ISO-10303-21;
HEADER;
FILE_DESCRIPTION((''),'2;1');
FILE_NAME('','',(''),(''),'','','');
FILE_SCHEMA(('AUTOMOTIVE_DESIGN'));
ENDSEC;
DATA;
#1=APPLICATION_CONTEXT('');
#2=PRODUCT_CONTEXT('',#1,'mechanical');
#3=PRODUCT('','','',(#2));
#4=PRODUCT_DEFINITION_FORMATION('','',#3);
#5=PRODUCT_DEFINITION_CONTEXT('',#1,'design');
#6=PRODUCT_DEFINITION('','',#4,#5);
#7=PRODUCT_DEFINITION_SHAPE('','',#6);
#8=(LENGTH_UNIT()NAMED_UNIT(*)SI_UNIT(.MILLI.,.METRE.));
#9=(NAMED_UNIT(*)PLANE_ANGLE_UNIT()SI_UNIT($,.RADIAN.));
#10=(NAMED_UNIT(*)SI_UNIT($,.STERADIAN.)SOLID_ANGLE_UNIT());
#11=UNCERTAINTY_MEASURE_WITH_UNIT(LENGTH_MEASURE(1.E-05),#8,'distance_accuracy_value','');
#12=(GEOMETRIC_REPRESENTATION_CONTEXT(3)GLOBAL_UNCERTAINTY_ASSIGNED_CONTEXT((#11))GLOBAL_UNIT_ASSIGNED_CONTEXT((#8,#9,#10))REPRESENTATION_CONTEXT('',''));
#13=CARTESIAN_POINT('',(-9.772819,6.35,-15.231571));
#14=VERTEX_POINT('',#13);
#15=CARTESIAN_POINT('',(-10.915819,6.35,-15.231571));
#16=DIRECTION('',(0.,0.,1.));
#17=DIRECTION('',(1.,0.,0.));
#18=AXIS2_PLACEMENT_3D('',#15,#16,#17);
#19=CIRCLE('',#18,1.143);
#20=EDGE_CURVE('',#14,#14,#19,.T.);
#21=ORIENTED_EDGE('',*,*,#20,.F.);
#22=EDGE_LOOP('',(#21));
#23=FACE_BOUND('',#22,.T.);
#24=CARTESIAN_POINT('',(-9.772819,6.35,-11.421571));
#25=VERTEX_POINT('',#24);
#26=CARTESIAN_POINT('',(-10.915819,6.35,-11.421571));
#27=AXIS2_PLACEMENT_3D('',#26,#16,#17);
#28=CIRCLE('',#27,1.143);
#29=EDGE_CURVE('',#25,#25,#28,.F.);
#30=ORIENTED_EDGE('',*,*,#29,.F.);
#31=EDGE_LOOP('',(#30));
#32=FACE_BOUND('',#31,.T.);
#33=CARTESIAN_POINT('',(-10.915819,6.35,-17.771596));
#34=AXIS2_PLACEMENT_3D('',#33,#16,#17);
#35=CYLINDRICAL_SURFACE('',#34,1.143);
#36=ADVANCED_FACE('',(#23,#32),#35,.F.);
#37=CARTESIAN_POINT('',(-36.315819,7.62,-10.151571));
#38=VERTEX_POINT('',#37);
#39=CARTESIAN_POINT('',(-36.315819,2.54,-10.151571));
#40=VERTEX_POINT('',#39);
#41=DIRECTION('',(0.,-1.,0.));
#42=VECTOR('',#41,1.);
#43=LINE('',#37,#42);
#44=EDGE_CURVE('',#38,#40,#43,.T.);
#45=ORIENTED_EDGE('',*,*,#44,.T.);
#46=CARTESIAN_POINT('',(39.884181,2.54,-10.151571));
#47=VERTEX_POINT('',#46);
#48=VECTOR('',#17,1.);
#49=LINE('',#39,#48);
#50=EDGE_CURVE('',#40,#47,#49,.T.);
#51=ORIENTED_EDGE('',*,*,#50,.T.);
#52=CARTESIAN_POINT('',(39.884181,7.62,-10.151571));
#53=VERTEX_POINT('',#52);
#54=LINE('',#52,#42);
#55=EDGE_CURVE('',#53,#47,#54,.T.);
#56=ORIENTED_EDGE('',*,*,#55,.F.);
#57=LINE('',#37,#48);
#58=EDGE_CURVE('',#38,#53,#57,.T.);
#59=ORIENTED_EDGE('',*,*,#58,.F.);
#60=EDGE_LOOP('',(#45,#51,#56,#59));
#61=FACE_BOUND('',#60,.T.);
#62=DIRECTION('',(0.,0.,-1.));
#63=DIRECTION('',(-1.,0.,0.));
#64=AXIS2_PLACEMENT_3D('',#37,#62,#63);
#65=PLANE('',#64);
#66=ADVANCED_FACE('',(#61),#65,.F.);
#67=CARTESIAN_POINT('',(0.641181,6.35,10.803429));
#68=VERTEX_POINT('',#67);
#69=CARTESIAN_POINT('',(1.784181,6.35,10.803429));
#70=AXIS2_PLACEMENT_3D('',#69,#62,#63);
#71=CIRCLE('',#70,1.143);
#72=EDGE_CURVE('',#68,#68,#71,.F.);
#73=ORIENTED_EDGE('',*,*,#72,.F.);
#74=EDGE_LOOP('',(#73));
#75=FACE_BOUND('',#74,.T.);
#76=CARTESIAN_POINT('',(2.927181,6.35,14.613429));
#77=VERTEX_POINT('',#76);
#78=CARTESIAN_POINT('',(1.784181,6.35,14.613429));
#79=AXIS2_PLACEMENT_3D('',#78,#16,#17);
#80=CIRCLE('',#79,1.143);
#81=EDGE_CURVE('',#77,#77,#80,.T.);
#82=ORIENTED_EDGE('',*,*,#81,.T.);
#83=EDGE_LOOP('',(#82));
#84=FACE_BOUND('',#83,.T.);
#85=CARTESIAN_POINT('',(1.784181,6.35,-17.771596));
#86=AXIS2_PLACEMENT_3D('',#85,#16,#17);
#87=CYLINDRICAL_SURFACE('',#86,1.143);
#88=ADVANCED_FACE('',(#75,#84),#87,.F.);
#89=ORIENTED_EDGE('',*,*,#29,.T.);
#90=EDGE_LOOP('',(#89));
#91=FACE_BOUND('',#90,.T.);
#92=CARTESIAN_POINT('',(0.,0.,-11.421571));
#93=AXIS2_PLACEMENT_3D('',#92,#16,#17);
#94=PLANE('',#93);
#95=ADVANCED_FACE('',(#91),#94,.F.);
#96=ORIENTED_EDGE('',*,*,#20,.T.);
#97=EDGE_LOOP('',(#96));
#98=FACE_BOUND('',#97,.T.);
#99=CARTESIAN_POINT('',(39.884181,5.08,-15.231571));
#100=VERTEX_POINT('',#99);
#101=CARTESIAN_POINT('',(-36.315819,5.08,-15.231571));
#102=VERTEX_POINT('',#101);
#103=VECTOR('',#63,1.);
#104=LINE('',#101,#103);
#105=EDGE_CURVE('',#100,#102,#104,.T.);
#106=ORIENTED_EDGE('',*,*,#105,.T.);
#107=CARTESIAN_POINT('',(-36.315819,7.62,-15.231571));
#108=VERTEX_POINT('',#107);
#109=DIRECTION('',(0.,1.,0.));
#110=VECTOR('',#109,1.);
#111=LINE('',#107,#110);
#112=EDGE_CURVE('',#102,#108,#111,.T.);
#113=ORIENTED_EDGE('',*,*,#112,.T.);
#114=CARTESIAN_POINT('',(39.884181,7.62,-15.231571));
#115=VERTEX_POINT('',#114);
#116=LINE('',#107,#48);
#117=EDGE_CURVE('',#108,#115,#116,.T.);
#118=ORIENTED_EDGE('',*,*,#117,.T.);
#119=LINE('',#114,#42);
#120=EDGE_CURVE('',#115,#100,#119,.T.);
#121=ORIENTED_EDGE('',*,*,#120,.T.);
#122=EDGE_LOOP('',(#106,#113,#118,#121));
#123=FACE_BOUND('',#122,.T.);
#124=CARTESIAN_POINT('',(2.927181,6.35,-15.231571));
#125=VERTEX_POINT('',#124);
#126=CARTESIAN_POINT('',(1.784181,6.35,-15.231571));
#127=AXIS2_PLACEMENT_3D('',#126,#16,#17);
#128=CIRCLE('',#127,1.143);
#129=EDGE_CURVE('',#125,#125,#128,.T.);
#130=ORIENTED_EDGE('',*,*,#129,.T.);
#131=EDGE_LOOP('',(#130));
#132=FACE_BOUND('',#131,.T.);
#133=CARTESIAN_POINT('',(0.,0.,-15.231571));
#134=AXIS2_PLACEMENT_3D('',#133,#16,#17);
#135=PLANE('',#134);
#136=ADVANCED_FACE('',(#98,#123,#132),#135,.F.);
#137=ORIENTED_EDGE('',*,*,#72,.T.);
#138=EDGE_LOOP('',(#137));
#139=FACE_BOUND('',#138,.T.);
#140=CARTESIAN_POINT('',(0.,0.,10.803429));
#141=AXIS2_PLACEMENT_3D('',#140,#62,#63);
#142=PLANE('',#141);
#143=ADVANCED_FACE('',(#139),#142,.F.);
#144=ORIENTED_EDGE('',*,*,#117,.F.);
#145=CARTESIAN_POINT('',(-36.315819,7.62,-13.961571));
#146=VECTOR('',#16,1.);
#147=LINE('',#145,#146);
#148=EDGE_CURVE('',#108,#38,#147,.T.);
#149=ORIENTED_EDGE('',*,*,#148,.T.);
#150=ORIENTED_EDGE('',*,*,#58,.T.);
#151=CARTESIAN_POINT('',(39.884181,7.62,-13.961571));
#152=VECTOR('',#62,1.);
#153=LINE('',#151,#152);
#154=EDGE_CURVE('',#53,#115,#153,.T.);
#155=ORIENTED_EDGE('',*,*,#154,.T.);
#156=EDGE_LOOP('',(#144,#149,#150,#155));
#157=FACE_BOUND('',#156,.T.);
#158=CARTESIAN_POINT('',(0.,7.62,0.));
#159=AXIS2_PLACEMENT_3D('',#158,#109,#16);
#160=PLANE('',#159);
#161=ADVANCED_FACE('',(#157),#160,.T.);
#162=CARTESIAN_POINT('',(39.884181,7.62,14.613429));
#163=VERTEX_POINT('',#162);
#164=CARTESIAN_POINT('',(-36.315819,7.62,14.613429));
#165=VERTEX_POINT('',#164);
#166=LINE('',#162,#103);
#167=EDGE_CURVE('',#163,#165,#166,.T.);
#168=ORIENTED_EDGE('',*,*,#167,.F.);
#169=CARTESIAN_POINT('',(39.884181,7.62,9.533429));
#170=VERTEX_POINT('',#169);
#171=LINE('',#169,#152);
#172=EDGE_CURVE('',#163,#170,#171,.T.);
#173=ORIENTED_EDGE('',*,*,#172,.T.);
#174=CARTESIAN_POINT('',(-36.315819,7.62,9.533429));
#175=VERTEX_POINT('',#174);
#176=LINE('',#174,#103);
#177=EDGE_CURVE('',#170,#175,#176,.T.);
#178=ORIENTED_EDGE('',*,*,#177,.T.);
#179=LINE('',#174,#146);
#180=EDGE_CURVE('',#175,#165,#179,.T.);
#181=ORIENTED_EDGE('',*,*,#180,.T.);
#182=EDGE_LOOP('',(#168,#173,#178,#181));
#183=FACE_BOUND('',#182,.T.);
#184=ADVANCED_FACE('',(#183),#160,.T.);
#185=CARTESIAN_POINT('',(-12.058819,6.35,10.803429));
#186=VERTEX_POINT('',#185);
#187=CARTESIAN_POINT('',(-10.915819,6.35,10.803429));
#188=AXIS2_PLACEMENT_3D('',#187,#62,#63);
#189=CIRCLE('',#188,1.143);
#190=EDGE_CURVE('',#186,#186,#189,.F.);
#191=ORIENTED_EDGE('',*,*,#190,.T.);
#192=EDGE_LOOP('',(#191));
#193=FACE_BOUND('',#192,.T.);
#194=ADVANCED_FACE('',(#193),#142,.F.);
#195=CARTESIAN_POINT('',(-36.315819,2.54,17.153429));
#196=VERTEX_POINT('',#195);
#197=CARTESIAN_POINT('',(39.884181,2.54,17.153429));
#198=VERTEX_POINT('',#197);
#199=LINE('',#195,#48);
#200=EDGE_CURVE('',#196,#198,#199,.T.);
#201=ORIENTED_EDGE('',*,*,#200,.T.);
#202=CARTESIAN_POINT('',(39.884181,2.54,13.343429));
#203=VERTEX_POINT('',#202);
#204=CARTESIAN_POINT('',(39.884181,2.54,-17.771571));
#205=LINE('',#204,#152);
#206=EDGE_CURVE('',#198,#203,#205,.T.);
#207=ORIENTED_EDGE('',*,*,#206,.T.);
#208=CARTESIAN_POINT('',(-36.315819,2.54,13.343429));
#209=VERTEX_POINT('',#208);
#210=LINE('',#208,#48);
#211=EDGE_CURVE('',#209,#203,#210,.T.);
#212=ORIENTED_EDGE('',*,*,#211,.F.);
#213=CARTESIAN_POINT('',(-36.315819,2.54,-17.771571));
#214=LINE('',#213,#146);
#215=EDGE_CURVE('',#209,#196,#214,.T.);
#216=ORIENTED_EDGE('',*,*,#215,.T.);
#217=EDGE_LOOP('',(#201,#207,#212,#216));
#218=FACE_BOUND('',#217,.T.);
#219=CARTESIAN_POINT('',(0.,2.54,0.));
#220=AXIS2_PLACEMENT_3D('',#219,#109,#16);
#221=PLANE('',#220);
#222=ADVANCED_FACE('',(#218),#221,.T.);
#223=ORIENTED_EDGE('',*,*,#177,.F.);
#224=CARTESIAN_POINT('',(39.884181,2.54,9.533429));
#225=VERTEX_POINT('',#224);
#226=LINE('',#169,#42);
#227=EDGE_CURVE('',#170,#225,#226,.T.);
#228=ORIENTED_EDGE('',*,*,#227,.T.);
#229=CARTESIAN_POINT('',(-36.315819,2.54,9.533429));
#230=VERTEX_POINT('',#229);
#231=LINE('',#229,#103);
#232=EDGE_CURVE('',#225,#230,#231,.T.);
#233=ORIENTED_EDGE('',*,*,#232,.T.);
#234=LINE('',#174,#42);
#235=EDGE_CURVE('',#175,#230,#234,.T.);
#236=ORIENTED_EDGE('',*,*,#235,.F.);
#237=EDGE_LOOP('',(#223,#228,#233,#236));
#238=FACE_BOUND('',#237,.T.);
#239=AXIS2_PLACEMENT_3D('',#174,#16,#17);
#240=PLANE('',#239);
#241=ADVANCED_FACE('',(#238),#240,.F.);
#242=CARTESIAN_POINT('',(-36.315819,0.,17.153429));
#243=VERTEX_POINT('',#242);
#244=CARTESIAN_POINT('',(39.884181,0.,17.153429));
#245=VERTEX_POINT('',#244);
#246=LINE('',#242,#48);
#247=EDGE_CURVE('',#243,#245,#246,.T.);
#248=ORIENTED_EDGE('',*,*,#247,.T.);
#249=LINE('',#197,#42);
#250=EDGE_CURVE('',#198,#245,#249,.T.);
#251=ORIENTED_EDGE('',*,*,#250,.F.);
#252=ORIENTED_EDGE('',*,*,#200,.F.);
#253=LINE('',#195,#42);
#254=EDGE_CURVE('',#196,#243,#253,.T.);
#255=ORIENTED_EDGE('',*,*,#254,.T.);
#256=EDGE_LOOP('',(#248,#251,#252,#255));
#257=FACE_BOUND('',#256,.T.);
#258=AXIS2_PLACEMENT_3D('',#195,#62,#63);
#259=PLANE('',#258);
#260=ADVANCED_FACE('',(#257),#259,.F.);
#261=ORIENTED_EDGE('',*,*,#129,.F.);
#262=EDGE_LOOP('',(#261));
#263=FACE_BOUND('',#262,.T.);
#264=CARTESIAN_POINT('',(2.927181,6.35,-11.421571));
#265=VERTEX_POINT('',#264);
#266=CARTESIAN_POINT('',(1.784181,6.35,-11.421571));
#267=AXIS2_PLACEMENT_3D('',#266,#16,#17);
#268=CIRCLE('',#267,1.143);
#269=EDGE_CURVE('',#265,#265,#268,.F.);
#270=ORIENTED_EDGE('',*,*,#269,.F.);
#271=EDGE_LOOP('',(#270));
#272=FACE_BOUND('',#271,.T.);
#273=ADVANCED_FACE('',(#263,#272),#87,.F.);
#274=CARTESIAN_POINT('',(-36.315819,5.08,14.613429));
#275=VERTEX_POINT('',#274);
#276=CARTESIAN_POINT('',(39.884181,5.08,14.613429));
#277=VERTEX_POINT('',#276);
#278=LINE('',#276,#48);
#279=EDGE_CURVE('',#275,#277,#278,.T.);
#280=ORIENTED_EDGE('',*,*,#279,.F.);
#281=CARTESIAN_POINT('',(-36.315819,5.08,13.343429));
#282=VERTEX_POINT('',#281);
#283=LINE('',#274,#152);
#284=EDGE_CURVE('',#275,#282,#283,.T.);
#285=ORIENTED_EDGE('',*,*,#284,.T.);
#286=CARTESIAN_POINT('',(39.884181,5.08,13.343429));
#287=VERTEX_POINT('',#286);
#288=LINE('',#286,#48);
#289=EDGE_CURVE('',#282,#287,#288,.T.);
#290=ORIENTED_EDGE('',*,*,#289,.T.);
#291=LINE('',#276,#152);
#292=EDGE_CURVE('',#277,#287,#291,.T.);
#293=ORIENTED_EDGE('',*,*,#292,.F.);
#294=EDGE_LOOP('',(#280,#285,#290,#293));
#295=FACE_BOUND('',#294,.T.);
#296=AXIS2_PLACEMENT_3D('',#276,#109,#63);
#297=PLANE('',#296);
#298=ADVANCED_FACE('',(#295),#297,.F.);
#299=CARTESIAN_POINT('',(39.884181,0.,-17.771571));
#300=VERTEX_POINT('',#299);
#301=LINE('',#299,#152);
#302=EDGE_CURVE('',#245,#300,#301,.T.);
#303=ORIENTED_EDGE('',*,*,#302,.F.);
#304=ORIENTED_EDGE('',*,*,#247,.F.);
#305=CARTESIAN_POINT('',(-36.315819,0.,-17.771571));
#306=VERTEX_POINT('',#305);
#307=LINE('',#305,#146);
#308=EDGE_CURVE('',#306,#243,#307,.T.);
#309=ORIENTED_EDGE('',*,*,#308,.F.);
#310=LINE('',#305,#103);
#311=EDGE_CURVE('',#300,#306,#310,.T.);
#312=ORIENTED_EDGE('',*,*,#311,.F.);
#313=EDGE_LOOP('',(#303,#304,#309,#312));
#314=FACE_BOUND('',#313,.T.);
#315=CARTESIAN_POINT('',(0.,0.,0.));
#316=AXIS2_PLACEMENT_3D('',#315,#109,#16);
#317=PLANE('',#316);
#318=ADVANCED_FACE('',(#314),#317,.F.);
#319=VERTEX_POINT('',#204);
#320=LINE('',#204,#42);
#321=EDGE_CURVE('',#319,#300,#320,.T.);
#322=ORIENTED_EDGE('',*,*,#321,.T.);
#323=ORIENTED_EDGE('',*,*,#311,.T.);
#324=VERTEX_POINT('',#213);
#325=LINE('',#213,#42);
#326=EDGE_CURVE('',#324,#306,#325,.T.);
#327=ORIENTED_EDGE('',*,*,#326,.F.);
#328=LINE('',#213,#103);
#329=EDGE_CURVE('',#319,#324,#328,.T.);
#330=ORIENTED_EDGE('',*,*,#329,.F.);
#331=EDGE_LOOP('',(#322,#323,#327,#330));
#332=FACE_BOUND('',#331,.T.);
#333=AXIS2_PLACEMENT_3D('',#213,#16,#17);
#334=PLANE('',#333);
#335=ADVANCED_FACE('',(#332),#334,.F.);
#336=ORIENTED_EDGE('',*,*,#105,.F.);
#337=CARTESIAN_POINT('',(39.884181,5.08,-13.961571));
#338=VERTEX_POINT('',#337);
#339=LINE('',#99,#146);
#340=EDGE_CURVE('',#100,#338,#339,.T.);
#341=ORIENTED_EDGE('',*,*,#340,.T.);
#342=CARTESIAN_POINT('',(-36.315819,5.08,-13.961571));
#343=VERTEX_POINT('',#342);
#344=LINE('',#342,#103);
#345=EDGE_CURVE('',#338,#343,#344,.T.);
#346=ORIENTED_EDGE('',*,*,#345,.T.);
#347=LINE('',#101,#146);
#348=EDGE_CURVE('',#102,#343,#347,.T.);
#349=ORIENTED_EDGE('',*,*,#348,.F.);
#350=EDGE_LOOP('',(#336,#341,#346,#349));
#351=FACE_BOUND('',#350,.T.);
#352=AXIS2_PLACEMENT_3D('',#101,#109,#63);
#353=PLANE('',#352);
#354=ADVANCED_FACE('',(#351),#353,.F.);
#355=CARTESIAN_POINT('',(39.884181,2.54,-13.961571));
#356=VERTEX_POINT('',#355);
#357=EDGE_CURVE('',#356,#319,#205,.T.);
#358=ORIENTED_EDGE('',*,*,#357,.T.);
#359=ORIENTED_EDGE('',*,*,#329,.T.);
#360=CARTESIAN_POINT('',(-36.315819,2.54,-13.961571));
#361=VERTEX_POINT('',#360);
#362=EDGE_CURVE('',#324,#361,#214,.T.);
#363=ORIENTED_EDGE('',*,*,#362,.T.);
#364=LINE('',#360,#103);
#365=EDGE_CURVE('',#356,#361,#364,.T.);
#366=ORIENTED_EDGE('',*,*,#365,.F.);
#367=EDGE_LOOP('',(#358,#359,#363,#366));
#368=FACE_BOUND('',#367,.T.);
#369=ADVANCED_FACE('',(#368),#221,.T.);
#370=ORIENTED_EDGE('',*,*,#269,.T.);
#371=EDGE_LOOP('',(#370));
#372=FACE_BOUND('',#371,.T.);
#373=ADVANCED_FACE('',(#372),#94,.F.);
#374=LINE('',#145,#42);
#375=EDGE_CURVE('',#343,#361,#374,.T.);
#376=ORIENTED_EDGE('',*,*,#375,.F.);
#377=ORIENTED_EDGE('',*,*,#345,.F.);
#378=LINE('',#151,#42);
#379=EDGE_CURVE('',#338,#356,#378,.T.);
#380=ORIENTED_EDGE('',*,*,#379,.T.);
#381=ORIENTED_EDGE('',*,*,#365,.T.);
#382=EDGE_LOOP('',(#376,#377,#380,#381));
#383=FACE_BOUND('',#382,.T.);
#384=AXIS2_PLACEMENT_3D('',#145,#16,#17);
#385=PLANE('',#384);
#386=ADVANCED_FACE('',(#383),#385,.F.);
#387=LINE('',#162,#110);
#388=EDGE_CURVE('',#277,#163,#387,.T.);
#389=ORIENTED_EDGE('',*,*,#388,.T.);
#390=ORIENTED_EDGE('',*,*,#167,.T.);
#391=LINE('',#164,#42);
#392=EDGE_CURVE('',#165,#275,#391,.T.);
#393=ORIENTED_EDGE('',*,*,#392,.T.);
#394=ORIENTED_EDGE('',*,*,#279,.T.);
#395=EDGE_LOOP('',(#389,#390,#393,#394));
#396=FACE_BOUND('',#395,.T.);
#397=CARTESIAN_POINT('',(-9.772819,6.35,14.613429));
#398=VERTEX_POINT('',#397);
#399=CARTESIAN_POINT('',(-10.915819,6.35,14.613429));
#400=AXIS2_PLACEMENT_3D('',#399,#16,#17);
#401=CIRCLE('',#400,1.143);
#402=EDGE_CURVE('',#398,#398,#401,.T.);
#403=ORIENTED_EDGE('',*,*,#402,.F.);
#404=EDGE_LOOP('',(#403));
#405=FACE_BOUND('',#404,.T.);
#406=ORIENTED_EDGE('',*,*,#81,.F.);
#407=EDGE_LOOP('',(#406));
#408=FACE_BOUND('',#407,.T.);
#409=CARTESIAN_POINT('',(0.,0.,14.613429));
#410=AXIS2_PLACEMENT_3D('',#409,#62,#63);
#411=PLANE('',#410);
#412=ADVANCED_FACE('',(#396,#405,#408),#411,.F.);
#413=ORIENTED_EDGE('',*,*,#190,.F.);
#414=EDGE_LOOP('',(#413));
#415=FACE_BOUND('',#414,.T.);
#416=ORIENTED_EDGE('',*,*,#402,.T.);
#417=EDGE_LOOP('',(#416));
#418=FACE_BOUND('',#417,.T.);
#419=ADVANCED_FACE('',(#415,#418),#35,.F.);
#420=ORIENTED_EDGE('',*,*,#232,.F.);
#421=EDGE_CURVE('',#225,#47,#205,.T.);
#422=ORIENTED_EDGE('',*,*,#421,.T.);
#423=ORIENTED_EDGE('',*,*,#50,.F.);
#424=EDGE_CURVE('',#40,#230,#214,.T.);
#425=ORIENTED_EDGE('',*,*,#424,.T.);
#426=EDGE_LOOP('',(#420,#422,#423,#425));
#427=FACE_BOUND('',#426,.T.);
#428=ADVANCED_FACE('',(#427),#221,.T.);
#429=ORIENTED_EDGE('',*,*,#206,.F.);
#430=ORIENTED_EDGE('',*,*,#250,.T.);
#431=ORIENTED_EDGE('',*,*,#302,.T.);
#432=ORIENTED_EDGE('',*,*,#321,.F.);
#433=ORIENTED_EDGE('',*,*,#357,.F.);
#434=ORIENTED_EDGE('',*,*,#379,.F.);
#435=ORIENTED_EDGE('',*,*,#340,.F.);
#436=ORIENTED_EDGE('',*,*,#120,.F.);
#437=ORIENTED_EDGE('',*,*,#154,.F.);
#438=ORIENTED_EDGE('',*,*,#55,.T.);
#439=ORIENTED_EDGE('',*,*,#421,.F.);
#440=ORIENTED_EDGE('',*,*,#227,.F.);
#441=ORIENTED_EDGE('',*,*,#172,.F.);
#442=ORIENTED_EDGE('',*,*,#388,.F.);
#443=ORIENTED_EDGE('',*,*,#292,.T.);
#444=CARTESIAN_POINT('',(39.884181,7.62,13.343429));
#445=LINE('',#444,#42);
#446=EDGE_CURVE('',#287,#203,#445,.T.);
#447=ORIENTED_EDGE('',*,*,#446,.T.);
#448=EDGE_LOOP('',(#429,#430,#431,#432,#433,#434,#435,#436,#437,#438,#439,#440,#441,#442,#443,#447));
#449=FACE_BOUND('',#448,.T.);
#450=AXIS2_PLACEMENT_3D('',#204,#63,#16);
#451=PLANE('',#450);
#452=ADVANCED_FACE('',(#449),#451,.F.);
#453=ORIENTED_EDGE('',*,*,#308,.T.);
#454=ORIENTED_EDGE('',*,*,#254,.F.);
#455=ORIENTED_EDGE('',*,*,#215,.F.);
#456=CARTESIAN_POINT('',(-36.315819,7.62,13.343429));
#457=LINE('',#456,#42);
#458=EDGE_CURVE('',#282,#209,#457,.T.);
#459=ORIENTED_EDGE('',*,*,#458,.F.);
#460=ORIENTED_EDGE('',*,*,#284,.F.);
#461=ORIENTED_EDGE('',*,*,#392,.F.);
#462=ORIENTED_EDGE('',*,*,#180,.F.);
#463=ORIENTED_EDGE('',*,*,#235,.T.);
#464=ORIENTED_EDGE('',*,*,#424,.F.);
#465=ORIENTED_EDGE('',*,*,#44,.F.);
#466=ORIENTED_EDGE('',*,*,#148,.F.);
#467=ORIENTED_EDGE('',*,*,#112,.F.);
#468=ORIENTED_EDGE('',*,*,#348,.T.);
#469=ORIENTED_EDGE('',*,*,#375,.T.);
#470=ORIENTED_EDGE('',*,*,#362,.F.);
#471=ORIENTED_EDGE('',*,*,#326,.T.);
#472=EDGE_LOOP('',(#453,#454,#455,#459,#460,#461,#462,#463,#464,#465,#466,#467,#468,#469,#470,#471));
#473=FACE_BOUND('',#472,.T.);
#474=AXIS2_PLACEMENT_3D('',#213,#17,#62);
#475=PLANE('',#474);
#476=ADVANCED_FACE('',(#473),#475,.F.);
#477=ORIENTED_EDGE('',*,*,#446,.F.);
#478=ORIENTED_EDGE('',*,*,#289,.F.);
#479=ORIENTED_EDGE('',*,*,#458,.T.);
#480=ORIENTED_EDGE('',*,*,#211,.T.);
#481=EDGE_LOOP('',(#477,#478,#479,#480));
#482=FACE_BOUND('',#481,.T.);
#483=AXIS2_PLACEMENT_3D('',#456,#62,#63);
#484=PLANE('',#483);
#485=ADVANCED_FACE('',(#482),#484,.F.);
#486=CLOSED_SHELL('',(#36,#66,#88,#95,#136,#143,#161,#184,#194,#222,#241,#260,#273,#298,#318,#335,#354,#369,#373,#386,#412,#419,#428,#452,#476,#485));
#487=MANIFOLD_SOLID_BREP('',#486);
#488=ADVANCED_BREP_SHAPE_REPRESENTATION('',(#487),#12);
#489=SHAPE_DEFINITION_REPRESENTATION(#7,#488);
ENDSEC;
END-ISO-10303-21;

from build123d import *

# Parameters (mm, degrees)
SKETCH1_W               = 76.2
SKETCH1_H               = 34.925
BOSS_EXTRUDE1_DEPTH     = 2.54
SKETCH3_W               = 76.2
SKETCH3_H               = 3.81
BOSS_EXTRUDE3_DEPTH     = 5.08
SKETCH6_W               = 76.2
SKETCH6_H               = 2.54
BOSS_EXTRUDE4_DEPTH     = 1.27
SKETCH7_W               = 76.2
SKETCH7_H               = 2.54
BOSS_EXTRUDE5_DEPTH     = 1.27
FILL_START              = -15.231570796
FILL_PATTERN1_OUTLINE_R = 1.143
FILL_PATTERN1_DEPTH     = 29.845
SKETCH8_W               = 76.2
SKETCH8_H               = 2.54
BOSS_EXTRUDE6_DEPTH     = 1.27
SKETCH9_W               = 76.2
SKETCH9_H               = 2.54
BOSS_EXTRUDE7_DEPTH     = 1.27


# Read off the part's stored shape, not the designer's step: Fill Pattern1
with BuildPart() as part:
    # Sketch1 → Boss-Extrude1 (new body)
    with BuildSketch(Plane(origin=(0, 0, 0), x_dir=(1, 0, 0), z_dir=(0, 1, 0))):
        with Locations((1.784181416, 0.309070796)):
            Rectangle(SKETCH1_W, SKETCH1_H)
    extrude(amount=BOSS_EXTRUDE1_DEPTH)

    # Sketch3 → Boss-Extrude3 (add)
    with BuildSketch(Plane(origin=(0, 2.54, 0), x_dir=(1, 0, 0), z_dir=(0, 1, 0))):
        with Locations((1.784181416, 12.056570796)):
            Rectangle(SKETCH3_W, SKETCH3_H)
        with Locations((1.784181416, -11.438429204)):
            Rectangle(SKETCH3_W, SKETCH3_H)
    extrude(amount=BOSS_EXTRUDE3_DEPTH)

    # Sketch6 → Boss-Extrude4 (add)
    with BuildSketch(Plane.XY.offset(13.343429204)):
        with Locations((1.784181416, 6.35)):
            Rectangle(SKETCH6_W, SKETCH6_H)
    extrude(amount=BOSS_EXTRUDE4_DEPTH)

    # Sketch7 → Boss-Extrude5 (add)
    with BuildSketch(Plane(origin=(0, 0, -13.961570796), x_dir=(-1, 0, 0), z_dir=(0, 0, -1))):
        with Locations((-1.784181416, 6.35)):
            Rectangle(SKETCH7_W, SKETCH7_H)
    extrude(amount=BOSS_EXTRUDE5_DEPTH)

    # Fill Pattern1 outline → Fill Pattern1 (cut)
    with BuildSketch(Plane.XY.offset(FILL_START)):
        with Locations((1.784181416, 6.35)):
            Circle(FILL_PATTERN1_OUTLINE_R)
        with Locations((-10.915818584, 6.35)):
            Circle(FILL_PATTERN1_OUTLINE_R)
    extrude(amount=FILL_PATTERN1_DEPTH, mode=Mode.SUBTRACT)

    # Sketch8 → Boss-Extrude6 (add)
    with BuildSketch(Plane(origin=(0, 0, 9.533429204), x_dir=(-1, 0, 0), z_dir=(0, 0, -1))):
        with Locations((-1.784181416, 6.35)):
            Rectangle(SKETCH8_W, SKETCH8_H)
    extrude(amount=-BOSS_EXTRUDE6_DEPTH)

    # Sketch9 → Boss-Extrude7 (add)
    with BuildSketch(Plane.XY.offset(-10.151570796)):
        with Locations((1.784181416, 6.35)):
            Rectangle(SKETCH9_W, SKETCH9_H)
    extrude(amount=-BOSS_EXTRUDE7_DEPTH)


solid = part.part
